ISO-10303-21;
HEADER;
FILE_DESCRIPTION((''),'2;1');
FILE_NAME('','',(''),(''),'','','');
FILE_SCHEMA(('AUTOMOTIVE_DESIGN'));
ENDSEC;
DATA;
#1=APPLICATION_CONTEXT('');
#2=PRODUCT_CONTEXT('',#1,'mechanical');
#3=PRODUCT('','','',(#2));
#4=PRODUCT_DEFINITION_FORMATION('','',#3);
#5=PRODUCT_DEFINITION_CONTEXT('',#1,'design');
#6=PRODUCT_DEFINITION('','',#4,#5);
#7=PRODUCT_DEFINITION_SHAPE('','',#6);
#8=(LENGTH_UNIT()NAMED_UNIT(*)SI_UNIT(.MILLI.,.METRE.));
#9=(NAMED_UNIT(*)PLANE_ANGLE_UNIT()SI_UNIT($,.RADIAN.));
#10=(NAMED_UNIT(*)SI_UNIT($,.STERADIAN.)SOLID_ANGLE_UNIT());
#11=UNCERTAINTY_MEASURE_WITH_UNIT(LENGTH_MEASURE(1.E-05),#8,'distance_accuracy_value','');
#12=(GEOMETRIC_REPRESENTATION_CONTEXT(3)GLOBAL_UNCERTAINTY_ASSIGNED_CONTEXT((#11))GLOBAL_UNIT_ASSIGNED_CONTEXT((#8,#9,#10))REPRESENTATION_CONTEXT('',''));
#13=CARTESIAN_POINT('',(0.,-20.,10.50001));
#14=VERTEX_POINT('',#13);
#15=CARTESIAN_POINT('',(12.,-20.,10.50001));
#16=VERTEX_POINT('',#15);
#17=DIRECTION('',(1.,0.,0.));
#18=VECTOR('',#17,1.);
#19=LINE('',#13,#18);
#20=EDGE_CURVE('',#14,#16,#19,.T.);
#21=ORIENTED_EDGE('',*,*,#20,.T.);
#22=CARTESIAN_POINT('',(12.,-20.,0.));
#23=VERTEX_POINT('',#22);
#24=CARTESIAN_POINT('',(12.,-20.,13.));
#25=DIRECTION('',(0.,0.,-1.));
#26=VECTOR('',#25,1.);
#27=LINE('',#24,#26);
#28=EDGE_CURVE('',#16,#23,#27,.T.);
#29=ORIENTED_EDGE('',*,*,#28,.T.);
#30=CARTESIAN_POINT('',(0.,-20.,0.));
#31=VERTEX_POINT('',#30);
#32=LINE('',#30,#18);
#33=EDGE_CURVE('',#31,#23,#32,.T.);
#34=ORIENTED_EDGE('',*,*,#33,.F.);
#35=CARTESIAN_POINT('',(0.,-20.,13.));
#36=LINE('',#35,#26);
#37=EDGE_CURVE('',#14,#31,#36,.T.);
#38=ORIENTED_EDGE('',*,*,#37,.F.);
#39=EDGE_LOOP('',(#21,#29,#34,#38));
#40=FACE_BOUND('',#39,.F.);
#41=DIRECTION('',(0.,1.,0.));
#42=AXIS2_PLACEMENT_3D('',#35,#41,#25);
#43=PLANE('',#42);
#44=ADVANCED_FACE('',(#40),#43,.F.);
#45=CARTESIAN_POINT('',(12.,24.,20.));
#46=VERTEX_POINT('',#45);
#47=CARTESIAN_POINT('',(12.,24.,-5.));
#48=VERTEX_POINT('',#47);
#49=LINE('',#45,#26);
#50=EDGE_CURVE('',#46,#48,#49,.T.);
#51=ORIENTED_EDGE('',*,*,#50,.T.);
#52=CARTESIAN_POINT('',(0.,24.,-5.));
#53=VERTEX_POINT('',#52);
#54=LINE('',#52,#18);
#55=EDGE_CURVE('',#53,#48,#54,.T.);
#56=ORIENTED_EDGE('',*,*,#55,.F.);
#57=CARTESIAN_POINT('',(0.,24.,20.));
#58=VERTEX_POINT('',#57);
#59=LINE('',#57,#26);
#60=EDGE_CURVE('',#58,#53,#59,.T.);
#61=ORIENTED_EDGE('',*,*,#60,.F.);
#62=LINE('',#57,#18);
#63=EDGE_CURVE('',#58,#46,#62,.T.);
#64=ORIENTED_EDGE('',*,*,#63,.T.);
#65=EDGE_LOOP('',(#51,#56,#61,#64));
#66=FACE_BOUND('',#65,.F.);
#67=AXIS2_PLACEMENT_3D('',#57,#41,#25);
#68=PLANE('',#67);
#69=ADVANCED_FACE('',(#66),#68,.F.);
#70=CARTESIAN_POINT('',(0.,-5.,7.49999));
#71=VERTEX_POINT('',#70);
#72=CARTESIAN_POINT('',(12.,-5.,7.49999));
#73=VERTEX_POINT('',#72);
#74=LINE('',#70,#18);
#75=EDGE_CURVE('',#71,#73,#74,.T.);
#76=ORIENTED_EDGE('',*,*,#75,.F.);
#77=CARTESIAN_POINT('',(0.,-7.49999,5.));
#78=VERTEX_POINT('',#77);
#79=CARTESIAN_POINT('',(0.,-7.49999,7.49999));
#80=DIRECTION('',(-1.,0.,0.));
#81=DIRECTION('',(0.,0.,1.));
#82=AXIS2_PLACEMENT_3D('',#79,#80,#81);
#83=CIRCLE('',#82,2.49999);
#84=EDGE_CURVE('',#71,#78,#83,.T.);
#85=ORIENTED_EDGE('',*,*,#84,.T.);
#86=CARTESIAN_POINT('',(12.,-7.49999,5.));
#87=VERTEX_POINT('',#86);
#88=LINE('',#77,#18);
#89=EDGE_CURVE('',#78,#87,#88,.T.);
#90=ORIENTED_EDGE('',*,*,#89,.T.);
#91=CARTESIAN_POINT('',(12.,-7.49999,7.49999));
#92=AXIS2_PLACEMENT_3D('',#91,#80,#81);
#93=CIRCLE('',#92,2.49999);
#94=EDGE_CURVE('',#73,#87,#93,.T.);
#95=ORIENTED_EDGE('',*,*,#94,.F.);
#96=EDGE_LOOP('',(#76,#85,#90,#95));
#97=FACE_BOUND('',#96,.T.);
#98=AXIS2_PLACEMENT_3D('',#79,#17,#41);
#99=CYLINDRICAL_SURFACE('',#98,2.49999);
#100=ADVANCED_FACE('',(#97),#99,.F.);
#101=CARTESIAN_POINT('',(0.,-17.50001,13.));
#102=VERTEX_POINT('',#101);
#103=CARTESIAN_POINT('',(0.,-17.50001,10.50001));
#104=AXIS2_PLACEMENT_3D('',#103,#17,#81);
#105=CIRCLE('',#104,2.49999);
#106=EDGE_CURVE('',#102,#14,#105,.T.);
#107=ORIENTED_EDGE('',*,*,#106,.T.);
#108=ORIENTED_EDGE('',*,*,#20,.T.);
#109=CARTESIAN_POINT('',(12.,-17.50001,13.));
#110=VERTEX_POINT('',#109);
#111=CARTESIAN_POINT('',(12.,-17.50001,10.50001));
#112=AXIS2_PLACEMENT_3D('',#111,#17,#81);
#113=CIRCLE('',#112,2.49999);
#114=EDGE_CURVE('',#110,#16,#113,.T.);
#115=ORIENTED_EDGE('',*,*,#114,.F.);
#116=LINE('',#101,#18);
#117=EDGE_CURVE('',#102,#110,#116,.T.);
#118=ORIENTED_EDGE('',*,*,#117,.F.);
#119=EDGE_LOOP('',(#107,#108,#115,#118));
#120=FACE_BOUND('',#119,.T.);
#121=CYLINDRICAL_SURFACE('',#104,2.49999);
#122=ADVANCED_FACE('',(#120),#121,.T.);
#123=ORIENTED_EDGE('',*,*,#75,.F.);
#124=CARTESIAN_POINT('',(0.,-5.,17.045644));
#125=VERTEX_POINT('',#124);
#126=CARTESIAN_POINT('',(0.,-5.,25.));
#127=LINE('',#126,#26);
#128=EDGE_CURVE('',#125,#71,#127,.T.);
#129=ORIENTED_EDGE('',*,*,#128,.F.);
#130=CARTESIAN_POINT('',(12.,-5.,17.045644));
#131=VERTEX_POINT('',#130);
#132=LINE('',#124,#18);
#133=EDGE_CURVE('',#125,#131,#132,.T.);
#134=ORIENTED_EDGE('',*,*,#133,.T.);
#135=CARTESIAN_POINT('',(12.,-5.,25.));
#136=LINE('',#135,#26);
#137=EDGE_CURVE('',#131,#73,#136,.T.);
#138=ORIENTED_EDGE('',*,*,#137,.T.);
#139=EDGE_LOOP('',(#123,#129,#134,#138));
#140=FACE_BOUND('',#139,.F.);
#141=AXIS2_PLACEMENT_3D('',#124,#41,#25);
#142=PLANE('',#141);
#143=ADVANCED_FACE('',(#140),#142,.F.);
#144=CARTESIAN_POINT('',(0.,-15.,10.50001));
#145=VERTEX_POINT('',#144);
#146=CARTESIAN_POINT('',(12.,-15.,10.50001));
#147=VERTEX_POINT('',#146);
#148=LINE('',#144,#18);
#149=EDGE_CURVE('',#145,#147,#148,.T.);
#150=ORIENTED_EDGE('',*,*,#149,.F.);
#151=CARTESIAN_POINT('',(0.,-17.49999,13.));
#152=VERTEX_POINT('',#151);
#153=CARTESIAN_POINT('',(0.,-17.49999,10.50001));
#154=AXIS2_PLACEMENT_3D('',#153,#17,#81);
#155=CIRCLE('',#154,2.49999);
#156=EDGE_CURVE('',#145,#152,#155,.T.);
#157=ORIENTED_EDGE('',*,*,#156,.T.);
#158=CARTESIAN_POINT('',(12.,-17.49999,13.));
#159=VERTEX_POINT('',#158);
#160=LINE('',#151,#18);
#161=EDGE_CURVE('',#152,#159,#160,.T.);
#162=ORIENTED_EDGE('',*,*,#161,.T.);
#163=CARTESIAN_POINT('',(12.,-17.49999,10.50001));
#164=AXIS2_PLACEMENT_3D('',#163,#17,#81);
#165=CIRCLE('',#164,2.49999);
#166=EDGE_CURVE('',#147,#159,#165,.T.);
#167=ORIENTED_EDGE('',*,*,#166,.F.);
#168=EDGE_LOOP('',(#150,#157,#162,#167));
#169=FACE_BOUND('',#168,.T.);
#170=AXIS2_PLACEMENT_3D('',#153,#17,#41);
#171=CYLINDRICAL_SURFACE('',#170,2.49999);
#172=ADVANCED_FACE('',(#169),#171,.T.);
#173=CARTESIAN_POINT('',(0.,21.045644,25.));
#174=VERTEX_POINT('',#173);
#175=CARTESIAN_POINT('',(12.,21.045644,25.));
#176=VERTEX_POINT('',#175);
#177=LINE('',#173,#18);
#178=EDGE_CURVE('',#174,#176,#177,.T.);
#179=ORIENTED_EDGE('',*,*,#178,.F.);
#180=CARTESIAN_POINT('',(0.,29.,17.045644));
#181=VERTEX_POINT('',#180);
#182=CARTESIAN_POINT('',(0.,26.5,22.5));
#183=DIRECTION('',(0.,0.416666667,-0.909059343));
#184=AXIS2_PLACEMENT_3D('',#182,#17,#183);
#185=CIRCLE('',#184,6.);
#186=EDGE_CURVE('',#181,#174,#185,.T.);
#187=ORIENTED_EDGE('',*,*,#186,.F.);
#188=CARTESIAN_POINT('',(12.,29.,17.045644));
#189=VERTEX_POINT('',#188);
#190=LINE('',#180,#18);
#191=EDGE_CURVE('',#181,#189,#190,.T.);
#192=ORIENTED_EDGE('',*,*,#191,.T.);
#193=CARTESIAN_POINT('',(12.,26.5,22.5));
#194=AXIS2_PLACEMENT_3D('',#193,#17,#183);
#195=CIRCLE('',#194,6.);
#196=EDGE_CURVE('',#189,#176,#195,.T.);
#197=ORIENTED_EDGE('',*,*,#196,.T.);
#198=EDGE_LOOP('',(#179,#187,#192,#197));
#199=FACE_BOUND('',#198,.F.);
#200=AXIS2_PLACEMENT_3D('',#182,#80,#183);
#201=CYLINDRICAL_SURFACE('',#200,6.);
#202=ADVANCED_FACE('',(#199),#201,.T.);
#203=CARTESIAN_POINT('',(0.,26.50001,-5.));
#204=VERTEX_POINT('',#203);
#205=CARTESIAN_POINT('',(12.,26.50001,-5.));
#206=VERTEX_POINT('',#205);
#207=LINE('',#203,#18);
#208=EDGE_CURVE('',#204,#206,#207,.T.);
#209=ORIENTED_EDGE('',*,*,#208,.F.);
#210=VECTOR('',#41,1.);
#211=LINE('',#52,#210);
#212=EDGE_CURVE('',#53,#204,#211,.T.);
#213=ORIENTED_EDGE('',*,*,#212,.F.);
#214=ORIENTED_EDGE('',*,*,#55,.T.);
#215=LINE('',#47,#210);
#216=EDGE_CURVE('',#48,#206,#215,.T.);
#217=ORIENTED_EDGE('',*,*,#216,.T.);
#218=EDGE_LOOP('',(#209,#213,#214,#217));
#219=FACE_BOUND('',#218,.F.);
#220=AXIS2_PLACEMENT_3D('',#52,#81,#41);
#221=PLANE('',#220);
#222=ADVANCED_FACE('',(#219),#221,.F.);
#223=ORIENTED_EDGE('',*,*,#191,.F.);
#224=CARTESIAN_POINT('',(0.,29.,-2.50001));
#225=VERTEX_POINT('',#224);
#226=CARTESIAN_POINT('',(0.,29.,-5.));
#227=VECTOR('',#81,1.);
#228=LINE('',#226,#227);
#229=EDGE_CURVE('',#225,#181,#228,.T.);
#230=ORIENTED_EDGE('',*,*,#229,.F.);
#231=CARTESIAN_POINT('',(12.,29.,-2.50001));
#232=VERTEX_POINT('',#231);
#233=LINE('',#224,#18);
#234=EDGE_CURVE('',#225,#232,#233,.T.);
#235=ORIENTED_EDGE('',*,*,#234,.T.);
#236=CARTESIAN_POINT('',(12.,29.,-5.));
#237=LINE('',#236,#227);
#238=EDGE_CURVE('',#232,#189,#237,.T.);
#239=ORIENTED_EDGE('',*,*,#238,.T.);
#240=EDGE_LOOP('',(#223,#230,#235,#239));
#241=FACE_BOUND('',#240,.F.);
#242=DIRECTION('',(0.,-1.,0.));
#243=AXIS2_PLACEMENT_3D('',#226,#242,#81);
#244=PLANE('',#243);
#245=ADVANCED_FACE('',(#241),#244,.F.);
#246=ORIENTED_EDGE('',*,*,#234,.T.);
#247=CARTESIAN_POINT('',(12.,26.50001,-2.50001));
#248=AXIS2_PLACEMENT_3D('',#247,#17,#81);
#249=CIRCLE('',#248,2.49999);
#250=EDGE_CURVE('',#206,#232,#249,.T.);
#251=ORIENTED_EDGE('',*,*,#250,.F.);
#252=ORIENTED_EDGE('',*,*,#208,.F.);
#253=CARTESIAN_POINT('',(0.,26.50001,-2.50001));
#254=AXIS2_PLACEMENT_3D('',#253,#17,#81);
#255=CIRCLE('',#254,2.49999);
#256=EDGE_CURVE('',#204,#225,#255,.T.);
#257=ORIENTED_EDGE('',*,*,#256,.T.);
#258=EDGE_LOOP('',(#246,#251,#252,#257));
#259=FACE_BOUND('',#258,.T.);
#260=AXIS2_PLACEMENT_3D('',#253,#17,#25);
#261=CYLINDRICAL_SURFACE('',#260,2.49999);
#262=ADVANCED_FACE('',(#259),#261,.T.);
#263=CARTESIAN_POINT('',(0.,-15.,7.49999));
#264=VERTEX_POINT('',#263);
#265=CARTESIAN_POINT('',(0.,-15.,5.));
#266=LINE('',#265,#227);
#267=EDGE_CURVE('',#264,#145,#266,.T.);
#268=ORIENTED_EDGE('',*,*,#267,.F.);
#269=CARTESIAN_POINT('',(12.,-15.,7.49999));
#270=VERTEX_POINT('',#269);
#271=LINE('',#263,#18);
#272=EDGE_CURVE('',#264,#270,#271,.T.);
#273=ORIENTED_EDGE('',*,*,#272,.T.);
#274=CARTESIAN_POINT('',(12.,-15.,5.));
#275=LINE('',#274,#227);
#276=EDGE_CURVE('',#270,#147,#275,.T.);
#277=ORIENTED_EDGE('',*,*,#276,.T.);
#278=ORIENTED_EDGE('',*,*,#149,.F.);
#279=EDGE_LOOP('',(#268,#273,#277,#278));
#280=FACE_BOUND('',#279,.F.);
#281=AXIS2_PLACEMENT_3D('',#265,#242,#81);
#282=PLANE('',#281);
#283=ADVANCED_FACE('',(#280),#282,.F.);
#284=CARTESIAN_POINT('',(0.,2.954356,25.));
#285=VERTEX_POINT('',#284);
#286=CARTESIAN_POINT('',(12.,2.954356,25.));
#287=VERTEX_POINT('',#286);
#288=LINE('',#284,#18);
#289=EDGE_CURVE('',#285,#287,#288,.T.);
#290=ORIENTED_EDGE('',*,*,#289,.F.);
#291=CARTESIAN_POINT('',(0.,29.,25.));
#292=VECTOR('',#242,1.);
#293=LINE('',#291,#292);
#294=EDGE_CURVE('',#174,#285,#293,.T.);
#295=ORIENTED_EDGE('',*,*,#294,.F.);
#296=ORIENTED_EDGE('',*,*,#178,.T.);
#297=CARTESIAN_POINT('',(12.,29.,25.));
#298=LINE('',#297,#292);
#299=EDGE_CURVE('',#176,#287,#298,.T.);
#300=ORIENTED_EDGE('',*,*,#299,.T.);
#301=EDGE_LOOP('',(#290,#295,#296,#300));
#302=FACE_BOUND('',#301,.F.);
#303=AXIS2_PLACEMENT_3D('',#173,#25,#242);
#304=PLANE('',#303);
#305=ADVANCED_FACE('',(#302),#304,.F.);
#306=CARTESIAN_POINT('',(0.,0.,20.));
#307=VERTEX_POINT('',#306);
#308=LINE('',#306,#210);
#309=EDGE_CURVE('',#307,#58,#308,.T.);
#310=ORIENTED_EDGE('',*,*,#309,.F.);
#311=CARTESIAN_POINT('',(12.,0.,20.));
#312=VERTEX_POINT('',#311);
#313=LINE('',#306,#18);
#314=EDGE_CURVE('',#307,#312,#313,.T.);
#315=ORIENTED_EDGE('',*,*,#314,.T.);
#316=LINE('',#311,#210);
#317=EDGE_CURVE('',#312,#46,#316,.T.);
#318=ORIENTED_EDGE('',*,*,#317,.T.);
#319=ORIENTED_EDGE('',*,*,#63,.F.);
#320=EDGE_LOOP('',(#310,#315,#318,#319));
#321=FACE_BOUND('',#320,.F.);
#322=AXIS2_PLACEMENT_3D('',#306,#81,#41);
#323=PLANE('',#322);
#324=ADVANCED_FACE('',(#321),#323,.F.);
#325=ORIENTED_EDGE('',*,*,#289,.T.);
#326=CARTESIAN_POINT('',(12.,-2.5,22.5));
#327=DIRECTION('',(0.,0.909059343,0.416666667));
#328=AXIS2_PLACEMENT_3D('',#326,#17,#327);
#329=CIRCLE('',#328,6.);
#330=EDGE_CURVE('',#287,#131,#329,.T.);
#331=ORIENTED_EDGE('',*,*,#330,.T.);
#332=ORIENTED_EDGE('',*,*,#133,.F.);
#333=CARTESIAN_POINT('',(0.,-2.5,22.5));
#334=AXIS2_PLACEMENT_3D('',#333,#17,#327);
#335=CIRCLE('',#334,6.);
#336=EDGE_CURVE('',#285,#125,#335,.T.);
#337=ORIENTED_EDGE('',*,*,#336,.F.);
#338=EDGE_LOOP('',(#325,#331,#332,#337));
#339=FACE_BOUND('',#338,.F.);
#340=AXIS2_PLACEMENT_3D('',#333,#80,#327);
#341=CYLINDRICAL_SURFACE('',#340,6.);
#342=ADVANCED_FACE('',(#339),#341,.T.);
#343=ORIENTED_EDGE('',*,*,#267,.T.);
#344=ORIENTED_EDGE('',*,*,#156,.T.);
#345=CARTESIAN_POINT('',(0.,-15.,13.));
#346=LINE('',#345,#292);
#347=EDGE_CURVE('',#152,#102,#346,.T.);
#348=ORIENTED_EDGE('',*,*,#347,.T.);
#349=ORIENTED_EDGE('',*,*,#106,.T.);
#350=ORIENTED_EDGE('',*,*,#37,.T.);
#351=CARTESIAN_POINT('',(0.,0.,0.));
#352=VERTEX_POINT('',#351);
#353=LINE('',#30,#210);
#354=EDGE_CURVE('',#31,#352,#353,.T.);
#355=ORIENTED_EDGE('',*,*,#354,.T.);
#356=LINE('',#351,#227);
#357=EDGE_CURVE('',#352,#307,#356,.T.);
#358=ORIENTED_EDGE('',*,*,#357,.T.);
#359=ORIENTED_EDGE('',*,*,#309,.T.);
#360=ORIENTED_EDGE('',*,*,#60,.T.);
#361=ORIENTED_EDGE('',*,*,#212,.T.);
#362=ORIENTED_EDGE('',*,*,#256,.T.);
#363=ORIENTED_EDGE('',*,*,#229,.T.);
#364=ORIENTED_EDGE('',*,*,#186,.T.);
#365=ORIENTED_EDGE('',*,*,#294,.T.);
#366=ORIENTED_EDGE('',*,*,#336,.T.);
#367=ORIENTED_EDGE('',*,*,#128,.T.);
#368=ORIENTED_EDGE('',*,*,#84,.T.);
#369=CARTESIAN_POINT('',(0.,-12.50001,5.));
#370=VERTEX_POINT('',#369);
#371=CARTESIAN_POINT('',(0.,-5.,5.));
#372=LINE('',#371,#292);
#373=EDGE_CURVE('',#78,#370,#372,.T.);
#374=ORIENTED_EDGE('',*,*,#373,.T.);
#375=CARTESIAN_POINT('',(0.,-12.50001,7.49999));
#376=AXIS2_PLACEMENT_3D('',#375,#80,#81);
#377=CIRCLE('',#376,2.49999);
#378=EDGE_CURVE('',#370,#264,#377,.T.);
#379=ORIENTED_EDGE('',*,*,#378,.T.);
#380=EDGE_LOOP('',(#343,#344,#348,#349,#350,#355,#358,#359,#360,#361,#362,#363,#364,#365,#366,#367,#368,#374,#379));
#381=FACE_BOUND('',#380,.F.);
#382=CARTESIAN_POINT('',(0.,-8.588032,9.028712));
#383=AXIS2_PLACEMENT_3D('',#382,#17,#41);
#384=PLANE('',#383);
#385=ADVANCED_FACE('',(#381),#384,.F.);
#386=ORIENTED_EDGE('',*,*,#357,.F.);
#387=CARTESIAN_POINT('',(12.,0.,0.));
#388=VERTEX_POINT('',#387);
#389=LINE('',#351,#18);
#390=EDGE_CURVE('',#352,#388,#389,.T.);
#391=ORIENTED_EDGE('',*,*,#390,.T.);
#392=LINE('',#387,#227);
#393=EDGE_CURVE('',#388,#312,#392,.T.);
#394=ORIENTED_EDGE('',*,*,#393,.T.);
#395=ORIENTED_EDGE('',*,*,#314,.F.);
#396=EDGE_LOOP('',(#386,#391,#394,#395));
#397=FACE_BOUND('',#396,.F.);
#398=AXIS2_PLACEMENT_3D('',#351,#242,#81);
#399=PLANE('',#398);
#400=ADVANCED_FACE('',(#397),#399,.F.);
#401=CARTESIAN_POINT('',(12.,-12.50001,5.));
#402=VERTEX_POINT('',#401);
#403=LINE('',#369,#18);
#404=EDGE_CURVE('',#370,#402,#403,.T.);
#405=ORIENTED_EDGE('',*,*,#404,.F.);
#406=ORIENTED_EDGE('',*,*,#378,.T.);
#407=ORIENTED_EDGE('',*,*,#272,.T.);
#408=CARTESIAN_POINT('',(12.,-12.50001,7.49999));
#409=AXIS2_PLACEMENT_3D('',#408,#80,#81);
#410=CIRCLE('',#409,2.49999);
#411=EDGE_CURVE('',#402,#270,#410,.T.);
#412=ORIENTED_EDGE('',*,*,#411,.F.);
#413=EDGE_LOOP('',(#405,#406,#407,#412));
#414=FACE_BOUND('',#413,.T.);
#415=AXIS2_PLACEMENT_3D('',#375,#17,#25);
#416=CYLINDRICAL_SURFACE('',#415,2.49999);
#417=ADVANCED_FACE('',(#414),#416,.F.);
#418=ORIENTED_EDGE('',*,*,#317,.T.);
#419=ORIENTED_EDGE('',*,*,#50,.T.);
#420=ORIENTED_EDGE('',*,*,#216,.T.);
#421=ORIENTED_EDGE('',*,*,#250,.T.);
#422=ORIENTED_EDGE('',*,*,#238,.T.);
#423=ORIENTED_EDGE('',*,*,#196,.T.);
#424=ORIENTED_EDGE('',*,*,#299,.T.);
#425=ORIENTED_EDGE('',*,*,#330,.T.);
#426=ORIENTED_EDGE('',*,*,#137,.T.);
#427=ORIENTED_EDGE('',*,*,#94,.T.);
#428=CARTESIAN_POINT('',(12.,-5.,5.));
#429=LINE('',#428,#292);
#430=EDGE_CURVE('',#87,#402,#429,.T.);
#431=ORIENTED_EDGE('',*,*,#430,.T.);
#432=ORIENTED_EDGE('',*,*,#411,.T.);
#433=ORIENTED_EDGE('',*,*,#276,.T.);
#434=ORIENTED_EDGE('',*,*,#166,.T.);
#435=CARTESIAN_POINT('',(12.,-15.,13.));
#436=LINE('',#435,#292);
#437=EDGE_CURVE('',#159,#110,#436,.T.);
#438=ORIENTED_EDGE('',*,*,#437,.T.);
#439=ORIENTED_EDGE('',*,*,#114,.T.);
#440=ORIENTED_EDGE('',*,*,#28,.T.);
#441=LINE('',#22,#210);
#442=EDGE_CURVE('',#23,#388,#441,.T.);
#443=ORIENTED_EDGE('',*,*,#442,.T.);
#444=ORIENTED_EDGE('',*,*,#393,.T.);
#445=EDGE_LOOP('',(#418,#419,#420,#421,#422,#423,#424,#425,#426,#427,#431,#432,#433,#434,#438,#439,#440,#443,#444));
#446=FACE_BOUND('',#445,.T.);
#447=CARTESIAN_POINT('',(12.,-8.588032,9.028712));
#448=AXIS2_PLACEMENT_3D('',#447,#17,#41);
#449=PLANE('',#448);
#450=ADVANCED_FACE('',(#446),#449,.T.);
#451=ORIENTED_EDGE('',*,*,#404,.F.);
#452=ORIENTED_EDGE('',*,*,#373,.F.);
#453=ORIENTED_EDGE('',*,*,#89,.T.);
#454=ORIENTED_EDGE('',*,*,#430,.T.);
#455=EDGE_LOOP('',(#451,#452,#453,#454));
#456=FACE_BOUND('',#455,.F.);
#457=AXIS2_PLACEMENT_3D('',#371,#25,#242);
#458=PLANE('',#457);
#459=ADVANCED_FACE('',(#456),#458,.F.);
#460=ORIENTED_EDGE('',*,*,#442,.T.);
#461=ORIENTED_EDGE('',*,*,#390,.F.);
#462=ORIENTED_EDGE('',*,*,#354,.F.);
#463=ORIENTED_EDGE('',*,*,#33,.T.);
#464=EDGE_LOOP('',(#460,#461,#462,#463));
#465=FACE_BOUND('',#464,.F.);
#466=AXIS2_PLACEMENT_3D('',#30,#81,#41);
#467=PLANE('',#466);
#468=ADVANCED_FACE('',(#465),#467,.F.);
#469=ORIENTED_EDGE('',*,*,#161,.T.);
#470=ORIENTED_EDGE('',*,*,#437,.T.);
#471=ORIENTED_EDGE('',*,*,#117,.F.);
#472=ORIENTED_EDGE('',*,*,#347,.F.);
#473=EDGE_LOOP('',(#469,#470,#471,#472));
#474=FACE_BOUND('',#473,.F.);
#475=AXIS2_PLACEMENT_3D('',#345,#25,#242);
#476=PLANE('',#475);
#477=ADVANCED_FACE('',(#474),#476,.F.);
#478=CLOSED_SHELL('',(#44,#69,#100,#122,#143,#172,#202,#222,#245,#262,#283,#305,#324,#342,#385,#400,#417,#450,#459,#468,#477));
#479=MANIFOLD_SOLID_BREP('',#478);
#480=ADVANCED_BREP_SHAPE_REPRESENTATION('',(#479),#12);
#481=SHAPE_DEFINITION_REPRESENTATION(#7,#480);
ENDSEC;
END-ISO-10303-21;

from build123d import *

# Parameters (mm, degrees)
F1_DEPTH = 12
F2_R     = 2.49999


# Not quite as in the source:
# - a fillet or chamfer is up to 0.001 mm smaller than in the source, because OpenCascade refuses the exact size


with BuildPart() as f1:
    # F0 (on Right) → F1 (new body)
    with BuildSketch(Plane.YZ):
        Polygon((-20, 0), (0, 0), (0, 20), (-5, 25), (-5, 17.0456439427), (-5, 5), (-15, 5), (-15, 13), (-20, 13), align=None)
        Polygon((-5, 25), (0, 20), (24, 20), (29, 25), (21.0456439427, 25), (2.9543560573, 25), align=None)
        Polygon((29, 25), (24, 20), (24, -5), (29, -5), (29, 17.0456439427), align=None)
        with BuildLine():
            Line((-5, 17.0456439427), (-5, 25))
            Line((-5, 25), (2.9543560573, 25))
            ThreePointArc((2.9543560573, 25), (-6.7426406871, 26.7426406871), (-5, 17.0456439427))
        make_face()
        with BuildLine():
            Line((21.0456439427, 25), (29, 25))
            Line((29, 25), (29, 17.0456439427))
            ThreePointArc((29, 17.0456439427), (30.7426406871, 26.7426406871), (21.0456439427, 25))
        make_face()
    extrude(amount=F1_DEPTH)

    # F2 (radius 2.5 in the source; OpenCascade refuses exactly that, so slightly less here)
    f2_edges = [f1.edges().sort_by_distance(p)[0] for p in [
        (6, -5, 5),
        (6, -15, 5),
        (6, 29, -5),
        (6, -20, 13),
        (6, -15, 13),
    ]]
    fillet(f2_edges, radius=F2_R)


solid = f1.part
